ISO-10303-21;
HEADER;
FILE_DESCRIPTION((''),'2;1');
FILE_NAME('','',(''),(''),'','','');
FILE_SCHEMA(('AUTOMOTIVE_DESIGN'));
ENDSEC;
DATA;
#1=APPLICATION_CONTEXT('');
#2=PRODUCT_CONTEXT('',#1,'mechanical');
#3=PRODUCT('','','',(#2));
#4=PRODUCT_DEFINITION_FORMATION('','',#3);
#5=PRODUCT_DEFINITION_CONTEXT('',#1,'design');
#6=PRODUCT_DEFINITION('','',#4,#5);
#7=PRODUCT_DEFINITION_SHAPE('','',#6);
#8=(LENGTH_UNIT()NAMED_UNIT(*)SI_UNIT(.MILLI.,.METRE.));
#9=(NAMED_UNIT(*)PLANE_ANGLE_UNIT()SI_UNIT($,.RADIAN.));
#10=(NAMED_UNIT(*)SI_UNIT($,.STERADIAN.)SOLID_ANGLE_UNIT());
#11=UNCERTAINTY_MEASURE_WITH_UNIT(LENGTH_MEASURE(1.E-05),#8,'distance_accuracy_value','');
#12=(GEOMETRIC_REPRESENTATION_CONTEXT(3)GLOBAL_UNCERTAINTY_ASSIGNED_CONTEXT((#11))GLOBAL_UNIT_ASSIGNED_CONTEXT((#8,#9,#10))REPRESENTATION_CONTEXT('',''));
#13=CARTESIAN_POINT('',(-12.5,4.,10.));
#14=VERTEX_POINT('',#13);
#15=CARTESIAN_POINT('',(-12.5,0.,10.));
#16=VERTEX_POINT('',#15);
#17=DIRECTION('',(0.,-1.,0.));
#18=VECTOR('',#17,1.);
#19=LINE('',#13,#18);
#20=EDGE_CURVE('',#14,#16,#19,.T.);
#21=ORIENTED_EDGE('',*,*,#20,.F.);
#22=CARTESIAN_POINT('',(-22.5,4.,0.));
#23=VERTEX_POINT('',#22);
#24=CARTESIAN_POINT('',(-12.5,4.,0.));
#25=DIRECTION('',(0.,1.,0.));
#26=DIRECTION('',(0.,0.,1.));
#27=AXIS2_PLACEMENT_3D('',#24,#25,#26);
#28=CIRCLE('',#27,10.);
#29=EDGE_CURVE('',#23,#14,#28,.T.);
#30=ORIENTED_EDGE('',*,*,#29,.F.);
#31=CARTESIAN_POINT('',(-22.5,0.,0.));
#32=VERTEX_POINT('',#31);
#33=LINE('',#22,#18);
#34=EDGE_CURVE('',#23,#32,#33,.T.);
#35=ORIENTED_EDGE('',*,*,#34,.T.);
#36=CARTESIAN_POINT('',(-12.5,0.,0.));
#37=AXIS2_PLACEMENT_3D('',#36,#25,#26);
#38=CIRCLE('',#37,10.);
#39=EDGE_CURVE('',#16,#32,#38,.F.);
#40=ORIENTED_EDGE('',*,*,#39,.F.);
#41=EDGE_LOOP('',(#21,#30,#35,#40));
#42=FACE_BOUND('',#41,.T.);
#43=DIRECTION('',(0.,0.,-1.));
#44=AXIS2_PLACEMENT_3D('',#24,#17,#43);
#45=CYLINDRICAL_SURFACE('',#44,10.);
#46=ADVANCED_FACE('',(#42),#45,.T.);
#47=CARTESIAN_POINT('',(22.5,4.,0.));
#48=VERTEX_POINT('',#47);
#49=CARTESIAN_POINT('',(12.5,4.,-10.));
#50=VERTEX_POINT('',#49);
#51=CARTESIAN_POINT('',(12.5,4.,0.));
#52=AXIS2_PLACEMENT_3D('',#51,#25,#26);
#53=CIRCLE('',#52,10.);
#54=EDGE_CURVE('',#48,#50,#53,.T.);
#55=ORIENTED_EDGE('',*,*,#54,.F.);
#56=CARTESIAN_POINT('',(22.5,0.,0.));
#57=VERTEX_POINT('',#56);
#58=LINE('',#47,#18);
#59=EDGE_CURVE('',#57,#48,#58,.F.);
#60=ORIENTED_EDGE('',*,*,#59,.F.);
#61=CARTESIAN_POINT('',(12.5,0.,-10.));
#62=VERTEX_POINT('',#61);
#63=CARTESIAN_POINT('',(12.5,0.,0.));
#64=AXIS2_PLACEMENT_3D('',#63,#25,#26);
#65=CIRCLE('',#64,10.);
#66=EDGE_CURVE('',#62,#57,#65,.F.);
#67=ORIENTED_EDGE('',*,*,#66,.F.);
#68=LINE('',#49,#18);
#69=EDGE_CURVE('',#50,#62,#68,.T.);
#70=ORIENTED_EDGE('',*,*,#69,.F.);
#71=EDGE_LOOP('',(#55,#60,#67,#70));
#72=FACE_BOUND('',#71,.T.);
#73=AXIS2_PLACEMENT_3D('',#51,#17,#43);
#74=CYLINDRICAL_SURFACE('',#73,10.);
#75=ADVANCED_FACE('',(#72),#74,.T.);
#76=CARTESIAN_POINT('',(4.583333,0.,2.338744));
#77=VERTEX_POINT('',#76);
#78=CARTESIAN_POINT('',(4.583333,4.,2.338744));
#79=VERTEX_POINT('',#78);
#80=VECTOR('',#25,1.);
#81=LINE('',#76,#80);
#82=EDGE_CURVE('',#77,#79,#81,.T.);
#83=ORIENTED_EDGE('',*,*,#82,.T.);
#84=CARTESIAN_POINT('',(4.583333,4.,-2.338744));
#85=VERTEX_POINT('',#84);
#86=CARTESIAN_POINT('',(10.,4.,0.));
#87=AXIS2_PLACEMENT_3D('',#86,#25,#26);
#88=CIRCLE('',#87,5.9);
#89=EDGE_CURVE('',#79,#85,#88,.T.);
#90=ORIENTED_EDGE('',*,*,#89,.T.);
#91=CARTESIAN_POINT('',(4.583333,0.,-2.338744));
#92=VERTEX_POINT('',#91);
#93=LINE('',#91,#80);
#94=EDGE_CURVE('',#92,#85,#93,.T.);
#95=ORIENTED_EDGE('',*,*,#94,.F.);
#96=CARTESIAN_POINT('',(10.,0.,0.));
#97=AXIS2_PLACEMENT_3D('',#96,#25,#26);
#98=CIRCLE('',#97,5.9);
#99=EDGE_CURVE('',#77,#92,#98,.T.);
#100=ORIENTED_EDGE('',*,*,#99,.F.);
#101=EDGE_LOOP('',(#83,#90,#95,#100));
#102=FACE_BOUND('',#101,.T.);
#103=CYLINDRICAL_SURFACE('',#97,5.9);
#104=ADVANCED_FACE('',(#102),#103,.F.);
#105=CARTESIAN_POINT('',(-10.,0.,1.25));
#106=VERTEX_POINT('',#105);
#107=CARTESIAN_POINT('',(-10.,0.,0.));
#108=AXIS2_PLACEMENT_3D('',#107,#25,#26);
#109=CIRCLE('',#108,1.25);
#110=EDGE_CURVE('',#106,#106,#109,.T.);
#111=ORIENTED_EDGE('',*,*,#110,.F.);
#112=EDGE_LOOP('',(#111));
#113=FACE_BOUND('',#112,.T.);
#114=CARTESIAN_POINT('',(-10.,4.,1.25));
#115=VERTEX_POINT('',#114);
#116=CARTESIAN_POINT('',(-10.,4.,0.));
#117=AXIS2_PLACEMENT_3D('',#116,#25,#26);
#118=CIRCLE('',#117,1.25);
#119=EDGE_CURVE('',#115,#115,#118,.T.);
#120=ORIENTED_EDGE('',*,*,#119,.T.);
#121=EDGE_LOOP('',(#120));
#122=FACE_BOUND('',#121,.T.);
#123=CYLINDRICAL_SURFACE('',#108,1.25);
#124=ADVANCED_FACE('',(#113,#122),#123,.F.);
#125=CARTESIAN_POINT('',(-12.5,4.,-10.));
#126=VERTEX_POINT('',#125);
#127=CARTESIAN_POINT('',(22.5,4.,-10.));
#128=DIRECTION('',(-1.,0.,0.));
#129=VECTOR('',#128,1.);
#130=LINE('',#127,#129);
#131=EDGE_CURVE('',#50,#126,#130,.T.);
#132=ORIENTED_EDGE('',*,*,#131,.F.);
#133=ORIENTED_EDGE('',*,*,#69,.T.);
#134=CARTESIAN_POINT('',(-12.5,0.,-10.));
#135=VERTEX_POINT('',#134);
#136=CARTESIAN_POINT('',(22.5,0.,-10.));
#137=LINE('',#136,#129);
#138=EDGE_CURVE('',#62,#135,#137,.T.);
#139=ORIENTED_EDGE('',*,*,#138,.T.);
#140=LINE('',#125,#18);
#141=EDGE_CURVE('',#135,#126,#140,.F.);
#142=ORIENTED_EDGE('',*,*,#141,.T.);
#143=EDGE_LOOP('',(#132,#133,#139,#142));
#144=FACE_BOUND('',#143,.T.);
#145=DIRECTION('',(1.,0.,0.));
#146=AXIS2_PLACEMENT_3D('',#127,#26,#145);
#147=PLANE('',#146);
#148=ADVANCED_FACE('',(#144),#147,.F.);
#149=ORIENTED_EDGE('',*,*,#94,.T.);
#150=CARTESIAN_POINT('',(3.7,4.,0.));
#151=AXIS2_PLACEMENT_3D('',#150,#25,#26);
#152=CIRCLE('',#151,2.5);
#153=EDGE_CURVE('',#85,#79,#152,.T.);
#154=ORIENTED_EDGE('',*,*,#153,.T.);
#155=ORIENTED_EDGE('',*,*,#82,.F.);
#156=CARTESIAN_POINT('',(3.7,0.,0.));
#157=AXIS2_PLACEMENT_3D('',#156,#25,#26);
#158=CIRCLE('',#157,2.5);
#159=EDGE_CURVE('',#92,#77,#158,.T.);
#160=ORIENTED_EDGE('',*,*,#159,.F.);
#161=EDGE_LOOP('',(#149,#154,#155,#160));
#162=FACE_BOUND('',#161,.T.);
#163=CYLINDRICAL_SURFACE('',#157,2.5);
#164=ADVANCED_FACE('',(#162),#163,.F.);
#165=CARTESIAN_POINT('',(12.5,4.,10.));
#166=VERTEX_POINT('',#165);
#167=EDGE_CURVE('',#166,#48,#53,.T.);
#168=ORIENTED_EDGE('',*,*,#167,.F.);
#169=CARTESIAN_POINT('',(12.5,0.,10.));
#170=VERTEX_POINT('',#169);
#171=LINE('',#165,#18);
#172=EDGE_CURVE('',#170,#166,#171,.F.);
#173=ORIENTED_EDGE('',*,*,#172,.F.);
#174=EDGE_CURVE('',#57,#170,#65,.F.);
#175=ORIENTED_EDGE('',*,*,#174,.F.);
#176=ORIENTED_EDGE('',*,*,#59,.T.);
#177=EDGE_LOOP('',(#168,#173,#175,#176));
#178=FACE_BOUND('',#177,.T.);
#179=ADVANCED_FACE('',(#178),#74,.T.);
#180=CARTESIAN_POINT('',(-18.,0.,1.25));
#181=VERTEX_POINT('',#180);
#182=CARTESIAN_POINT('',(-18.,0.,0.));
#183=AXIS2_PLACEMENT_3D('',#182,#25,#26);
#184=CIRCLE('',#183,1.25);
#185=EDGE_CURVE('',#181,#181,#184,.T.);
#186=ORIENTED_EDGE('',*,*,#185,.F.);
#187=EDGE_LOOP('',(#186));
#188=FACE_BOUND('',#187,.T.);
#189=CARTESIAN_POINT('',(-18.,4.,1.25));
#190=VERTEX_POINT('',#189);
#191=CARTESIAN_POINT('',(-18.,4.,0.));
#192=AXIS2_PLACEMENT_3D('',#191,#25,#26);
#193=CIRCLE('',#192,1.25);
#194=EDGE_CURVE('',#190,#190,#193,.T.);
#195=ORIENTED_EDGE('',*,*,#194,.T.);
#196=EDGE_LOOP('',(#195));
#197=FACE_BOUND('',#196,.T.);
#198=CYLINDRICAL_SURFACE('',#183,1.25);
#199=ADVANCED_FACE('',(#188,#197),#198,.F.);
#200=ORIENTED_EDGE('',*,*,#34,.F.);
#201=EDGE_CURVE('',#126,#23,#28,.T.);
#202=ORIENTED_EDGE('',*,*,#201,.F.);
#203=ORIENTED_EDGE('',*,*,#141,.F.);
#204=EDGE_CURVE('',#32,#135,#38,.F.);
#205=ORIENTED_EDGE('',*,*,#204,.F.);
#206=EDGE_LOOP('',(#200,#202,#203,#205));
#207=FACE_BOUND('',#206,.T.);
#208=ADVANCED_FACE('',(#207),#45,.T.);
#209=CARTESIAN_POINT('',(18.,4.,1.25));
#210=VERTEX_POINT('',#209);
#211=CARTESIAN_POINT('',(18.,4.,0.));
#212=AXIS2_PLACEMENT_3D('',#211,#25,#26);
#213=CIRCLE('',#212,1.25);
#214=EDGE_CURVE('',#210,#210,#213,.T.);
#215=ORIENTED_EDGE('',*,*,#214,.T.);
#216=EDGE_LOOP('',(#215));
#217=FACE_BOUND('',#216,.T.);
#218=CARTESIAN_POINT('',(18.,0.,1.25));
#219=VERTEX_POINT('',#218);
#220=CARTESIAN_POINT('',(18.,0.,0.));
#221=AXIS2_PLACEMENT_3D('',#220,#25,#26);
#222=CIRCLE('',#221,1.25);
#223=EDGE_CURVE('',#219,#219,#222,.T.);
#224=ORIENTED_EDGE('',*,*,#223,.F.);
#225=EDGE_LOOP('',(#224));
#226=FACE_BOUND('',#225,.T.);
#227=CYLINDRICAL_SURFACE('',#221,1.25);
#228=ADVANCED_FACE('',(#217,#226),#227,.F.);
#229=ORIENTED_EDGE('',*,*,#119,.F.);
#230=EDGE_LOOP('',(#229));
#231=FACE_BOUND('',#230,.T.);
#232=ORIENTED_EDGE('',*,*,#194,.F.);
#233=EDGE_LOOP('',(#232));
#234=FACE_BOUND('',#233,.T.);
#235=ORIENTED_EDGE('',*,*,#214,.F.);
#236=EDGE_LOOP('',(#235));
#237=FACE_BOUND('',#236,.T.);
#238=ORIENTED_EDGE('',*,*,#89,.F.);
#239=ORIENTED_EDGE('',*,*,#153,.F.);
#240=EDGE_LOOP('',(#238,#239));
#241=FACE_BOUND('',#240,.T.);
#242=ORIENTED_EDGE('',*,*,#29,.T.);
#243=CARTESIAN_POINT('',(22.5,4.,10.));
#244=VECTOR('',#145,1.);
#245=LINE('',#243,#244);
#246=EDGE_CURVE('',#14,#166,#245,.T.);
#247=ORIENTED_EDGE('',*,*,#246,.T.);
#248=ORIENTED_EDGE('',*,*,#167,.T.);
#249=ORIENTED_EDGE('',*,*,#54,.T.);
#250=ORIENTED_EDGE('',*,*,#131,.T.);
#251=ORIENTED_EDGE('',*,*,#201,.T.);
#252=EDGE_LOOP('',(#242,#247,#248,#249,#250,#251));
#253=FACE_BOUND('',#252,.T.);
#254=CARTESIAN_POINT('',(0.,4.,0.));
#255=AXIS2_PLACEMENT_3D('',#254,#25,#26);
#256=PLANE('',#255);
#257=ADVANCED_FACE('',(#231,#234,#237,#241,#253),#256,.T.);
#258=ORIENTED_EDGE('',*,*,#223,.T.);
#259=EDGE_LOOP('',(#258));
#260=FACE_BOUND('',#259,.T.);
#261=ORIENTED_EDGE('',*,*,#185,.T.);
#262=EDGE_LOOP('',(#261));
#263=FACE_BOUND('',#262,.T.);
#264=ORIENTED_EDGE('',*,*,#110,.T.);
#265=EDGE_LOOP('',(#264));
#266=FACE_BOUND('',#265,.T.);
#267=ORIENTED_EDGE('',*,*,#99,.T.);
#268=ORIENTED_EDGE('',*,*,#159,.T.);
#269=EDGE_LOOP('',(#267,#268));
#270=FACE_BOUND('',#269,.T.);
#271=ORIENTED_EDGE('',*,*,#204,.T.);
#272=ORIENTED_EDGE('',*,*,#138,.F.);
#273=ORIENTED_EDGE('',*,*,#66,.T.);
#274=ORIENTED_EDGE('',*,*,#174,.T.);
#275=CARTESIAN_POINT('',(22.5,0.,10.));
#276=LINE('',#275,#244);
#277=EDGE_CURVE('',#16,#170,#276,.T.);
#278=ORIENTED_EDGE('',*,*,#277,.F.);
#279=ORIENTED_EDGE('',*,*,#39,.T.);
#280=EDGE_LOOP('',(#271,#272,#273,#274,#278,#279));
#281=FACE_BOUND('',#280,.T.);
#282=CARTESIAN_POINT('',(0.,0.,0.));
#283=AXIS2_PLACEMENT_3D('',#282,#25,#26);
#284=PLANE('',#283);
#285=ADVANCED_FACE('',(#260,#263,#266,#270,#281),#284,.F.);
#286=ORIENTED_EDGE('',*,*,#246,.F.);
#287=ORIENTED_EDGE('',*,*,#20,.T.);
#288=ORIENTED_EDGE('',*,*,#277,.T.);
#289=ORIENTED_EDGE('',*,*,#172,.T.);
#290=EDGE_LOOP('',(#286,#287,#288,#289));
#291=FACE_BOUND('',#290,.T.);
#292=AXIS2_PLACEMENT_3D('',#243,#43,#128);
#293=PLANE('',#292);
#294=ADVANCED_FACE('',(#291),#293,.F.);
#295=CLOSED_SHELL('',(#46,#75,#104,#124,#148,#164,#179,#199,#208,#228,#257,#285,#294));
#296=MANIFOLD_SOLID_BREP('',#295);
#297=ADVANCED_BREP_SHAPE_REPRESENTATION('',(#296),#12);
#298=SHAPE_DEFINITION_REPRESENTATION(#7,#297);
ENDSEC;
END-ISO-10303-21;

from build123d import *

# Parameters (mm, degrees)
SKETCH1_W           = 45
SKETCH1_H           = 20
BOSS_EXTRUDE1_DEPTH = 4
SKETCH2_R           = 1.25
CUT_EXTRUDE1_DEPTH  = 25.944939367
FILLET2_R           = 10


with BuildPart() as part:
    # Sketch1 → Boss-Extrude1 (new body)
    with BuildSketch(Plane(origin=(0, 0, 0), x_dir=(1, 0, 0), z_dir=(0, 1, 0))):
        Rectangle(SKETCH1_W, SKETCH1_H)
    extrude(amount=BOSS_EXTRUDE1_DEPTH)

    # Sketch2 → Cut-Extrude1 (cut, through all)
    with BuildSketch(Plane(origin=(0, 4, 0), x_dir=(1, 0, 0), z_dir=(0, 1, 0))):
        with Locations(Location((18, 0, 0), (0, 0, 270))):
            Circle(SKETCH2_R)
        with Locations(Location((-10, 0, 0), (0, 0, 270))):
            Circle(SKETCH2_R)
        with Locations(Location((-18, 0, 0), (0, 0, 270))):
            Circle(SKETCH2_R)
        with BuildLine():
            ThreePointArc((4.583333333, -2.338743727), (15.9, 0), (4.583333333, 2.338743727))
            ThreePointArc((4.583333333, 2.338743727), (1.2, 0), (4.583333333, -2.338743727))
        make_face()
    extrude(amount=-CUT_EXTRUDE1_DEPTH, mode=Mode.SUBTRACT)

    # Fillet2
    fillet2_edges = [part.edges().sort_by_distance(p)[0] for p in [
        (-22.5, 2, -10),
        (22.5, 2, -10),
        (-22.5, 2, 10),
        (22.5, 2, 10),
    ]]
    fillet(fillet2_edges, radius=FILLET2_R - 0.0001)  # a hair under: the kernel refuses the full size


solid = part.part
